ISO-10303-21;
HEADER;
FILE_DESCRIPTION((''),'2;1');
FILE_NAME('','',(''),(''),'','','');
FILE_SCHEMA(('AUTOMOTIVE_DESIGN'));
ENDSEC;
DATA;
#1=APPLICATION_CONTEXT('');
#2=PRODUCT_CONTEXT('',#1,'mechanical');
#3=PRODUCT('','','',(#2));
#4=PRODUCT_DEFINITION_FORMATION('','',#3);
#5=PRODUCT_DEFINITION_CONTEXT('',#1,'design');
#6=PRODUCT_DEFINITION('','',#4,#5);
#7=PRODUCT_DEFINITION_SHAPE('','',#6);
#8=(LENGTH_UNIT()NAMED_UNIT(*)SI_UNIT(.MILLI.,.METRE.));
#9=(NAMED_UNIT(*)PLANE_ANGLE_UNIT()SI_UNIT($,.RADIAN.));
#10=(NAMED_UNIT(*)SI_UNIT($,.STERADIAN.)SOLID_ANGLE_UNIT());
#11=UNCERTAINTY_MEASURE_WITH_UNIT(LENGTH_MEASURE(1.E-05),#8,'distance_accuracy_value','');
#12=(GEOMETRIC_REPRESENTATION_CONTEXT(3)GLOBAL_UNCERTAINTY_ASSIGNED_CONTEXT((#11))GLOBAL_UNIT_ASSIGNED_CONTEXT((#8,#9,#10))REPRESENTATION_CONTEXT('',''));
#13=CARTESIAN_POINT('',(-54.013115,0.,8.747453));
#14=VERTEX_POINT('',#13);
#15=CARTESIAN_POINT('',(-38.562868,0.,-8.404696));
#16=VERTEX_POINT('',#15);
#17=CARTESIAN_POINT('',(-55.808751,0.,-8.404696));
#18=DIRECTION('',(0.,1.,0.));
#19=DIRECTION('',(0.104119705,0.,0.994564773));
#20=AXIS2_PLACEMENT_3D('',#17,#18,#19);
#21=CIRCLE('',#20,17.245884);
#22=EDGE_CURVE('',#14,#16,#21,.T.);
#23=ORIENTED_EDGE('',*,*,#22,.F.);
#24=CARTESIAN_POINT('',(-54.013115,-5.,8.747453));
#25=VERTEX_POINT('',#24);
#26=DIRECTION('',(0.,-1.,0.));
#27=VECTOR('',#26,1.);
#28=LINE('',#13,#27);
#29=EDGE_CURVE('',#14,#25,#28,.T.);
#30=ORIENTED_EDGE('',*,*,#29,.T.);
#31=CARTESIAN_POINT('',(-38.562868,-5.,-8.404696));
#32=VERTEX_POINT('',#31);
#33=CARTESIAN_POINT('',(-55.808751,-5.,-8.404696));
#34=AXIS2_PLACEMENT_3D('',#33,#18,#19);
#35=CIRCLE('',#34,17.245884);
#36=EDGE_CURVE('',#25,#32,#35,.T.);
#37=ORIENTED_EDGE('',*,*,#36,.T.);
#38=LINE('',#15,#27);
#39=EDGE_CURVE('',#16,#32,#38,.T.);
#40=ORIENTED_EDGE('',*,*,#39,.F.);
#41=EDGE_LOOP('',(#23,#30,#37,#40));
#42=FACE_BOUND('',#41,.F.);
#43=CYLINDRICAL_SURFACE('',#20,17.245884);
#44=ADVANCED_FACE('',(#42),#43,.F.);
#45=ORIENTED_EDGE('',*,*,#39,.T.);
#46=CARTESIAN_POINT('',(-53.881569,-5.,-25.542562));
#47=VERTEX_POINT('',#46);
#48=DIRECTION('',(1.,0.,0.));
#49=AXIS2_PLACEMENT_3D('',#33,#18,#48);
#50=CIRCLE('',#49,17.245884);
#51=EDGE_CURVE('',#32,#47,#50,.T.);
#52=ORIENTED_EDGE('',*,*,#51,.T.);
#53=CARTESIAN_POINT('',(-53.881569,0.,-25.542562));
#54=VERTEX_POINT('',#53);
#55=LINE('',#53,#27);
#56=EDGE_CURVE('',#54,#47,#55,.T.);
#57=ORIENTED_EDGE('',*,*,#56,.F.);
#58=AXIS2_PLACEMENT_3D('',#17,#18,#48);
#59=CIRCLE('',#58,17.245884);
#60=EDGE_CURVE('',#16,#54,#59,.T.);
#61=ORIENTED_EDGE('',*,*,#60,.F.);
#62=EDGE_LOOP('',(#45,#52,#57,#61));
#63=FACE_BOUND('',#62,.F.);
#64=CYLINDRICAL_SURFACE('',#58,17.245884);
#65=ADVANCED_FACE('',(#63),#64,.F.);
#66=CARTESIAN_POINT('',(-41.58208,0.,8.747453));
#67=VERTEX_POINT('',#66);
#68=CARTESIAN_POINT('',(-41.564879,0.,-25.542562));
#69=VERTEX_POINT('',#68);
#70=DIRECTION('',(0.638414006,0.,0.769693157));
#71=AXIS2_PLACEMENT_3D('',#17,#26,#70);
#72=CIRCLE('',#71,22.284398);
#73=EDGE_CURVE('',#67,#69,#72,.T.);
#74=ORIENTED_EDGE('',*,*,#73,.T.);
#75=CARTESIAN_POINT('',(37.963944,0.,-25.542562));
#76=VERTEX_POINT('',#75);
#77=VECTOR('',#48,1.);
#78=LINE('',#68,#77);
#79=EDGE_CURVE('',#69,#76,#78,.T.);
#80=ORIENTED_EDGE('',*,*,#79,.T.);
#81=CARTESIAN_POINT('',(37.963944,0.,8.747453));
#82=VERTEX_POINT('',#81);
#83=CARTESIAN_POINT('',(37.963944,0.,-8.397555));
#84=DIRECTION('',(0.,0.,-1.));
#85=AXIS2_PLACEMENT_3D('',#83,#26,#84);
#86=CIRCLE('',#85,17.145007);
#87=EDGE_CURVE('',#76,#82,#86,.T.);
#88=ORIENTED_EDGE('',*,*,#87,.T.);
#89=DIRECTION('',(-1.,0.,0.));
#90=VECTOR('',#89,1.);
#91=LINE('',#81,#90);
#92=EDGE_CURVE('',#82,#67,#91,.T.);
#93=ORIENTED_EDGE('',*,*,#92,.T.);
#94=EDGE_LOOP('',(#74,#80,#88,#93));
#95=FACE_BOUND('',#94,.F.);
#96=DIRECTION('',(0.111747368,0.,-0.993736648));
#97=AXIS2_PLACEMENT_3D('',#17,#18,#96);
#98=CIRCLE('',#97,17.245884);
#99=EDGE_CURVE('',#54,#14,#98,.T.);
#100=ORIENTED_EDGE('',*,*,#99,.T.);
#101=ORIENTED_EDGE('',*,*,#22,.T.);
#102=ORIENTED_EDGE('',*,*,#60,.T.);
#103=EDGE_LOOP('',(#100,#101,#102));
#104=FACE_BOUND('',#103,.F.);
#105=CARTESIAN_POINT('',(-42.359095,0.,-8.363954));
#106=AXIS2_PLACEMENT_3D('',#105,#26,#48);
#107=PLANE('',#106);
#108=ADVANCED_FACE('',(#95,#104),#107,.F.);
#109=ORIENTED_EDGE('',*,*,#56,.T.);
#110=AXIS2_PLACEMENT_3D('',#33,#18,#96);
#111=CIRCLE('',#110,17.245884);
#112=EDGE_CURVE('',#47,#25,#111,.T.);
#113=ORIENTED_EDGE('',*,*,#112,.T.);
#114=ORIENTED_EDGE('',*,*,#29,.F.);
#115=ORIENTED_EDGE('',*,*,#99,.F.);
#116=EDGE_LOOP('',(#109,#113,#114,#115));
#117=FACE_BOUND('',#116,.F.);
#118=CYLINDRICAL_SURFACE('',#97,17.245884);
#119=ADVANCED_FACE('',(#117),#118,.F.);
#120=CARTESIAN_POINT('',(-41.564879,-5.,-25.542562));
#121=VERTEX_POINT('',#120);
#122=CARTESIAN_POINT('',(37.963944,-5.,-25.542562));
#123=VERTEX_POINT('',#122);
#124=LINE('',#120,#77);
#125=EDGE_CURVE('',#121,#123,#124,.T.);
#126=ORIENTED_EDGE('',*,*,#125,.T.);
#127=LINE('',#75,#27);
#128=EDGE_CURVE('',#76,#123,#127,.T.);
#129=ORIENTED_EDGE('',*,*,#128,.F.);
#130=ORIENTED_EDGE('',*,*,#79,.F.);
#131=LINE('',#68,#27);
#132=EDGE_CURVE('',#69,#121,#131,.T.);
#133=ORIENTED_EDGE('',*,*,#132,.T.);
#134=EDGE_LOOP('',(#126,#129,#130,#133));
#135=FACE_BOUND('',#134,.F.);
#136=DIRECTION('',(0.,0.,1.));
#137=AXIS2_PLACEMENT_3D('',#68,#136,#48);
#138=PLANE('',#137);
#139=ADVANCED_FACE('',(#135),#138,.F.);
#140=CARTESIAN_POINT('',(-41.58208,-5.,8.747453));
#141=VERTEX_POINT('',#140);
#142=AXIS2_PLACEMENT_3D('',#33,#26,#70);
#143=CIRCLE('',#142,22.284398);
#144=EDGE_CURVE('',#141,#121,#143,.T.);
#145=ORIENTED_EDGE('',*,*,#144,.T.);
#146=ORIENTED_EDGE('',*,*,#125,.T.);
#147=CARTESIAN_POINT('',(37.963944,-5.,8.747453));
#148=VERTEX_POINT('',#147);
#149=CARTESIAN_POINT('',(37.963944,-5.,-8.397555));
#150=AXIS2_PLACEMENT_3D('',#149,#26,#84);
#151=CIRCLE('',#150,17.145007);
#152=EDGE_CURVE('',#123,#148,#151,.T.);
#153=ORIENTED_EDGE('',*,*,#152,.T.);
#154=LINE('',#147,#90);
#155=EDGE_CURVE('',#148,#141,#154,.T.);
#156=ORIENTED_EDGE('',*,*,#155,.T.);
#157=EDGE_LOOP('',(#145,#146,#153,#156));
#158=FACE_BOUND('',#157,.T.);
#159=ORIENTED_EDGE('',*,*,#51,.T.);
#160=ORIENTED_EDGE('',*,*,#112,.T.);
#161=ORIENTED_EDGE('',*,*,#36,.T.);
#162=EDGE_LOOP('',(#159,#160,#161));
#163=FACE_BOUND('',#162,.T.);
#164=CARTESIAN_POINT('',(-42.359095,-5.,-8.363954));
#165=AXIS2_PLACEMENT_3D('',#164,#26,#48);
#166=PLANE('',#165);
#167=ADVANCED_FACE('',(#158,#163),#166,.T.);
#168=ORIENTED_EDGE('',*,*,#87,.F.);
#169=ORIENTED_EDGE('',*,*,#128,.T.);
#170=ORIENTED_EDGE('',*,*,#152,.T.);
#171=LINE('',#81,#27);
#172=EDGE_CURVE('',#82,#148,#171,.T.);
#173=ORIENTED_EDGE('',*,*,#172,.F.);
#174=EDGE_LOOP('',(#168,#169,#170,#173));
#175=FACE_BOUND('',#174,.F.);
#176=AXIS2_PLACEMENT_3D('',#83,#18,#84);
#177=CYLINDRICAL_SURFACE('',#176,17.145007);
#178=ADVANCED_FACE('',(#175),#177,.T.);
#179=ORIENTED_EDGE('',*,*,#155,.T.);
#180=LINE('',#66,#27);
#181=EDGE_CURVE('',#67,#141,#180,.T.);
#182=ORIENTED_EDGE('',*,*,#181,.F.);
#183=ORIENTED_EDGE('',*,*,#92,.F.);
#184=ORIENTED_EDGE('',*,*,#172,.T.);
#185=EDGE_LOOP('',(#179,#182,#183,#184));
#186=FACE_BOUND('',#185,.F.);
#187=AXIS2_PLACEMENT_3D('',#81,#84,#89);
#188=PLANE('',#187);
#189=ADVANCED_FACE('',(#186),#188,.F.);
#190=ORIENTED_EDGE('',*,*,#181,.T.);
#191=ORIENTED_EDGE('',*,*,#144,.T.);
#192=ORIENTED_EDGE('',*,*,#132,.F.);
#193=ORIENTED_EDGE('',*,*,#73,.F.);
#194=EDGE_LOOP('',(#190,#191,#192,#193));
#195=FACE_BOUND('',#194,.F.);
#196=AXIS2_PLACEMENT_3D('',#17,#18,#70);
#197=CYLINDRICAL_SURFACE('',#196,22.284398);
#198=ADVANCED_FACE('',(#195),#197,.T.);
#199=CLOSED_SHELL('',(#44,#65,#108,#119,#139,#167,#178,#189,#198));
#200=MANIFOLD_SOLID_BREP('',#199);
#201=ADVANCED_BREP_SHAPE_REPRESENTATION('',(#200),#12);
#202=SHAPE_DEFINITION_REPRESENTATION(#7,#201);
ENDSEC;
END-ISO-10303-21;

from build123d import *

# Parameters (mm, degrees)
F1_DEPTH = 5


# Not quite as in the source:
# - the program builds the solid bodies; features that only make, move or delete a surface that nothing else refers to are left out


with BuildPart() as f1:
    # F0 (on Front) → F1 (new body)
    with BuildSketch(Plane.XZ):
        with BuildLine():
            ThreePointArc((-38.5628677204, -8.4046955637), (-42.950748766, -19.8978357544), (-53.8815692168, -25.542562124))
            Line((-53.8815692168, -25.542562124), (-41.5648788357, -25.542562124))
            ThreePointArc((-41.5648788357, -25.542562124), (-35.6343803196, -17.869848935), (-33.5243537826, -8.4046955637))
            ThreePointArc((-33.5243537826, -8.4046955637), (-35.6391308825, 1.0705767284), (-41.5820798093, 8.7474527367))
            Line((-41.5820798093, 8.7474527367), (-54.0131150031, 8.7474527367))
            ThreePointArc((-54.0131150031, 8.7474527367), (-42.9949338553, 3.137686474), (-38.5628677204, -8.4046955637))
        make_face()
        with BuildLine():
            Line((-41.5648788357, -25.542562124), (-53.8815692168, -25.542562124))
            ThreePointArc((-53.8815692168, -25.542562124), (-73.0545080153, -8.4708549583), (-54.0131150031, 8.7474527367))
            Line((-54.0131150031, 8.7474527367), (-41.5820798093, 8.7474527367))
            ThreePointArc((-41.5820798093, 8.7474527367), (-78.0931460515, -8.4158741323), (-41.5648788357, -25.542562124))
        make_face()
        with BuildLine():
            ThreePointArc((-33.5243537826, -8.4046955637), (-35.6343803196, -17.869848935), (-41.5648788357, -25.542562124))
            Line((-41.5648788357, -25.542562124), (37.9639441457, -25.542562124))
            ThreePointArc((37.9639441457, -25.542562124), (55.1089515761, -8.3975546937), (37.9639441457, 8.7474527367))
            Line((37.9639441457, 8.7474527367), (-41.5820798093, 8.7474527367))
            ThreePointArc((-41.5820798093, 8.7474527367), (-35.6391308825, 1.0705767284), (-33.5243537826, -8.4046955637))
        make_face()
        with BuildLine():
            Line((37.9639441457, -20.3371653928), (37.9639441457, -17.8371653928))
            ThreePointArc((37.9639441457, -17.8371653928), (44.7629027111, -8.9185826964), (37.9639441457, 0))
            Line((37.9639441457, 0), (37.9639441457, 2.5))
            ThreePointArc((37.9639441457, 2.5), (48.2332452633, -8.9185826964), (37.9639441457, -20.3371653928))
        make_face(mode=Mode.SUBTRACT)
        with BuildLine():
            ThreePointArc((37.9639441457, 0), (44.7629027111, -8.9185826964), (37.9639441457, -17.8371653928))
            Line((37.9639441457, -17.8371653928), (37.9639441457, -20.3371653928))
            ThreePointArc((37.9639441457, -20.3371653928), (48.2332452633, -8.9185826964), (37.9639441457, 2.5))
            Line((37.9639441457, 2.5), (37.9639441457, 0))
        make_face()
    extrude(amount=F1_DEPTH)


solid = f1.part
